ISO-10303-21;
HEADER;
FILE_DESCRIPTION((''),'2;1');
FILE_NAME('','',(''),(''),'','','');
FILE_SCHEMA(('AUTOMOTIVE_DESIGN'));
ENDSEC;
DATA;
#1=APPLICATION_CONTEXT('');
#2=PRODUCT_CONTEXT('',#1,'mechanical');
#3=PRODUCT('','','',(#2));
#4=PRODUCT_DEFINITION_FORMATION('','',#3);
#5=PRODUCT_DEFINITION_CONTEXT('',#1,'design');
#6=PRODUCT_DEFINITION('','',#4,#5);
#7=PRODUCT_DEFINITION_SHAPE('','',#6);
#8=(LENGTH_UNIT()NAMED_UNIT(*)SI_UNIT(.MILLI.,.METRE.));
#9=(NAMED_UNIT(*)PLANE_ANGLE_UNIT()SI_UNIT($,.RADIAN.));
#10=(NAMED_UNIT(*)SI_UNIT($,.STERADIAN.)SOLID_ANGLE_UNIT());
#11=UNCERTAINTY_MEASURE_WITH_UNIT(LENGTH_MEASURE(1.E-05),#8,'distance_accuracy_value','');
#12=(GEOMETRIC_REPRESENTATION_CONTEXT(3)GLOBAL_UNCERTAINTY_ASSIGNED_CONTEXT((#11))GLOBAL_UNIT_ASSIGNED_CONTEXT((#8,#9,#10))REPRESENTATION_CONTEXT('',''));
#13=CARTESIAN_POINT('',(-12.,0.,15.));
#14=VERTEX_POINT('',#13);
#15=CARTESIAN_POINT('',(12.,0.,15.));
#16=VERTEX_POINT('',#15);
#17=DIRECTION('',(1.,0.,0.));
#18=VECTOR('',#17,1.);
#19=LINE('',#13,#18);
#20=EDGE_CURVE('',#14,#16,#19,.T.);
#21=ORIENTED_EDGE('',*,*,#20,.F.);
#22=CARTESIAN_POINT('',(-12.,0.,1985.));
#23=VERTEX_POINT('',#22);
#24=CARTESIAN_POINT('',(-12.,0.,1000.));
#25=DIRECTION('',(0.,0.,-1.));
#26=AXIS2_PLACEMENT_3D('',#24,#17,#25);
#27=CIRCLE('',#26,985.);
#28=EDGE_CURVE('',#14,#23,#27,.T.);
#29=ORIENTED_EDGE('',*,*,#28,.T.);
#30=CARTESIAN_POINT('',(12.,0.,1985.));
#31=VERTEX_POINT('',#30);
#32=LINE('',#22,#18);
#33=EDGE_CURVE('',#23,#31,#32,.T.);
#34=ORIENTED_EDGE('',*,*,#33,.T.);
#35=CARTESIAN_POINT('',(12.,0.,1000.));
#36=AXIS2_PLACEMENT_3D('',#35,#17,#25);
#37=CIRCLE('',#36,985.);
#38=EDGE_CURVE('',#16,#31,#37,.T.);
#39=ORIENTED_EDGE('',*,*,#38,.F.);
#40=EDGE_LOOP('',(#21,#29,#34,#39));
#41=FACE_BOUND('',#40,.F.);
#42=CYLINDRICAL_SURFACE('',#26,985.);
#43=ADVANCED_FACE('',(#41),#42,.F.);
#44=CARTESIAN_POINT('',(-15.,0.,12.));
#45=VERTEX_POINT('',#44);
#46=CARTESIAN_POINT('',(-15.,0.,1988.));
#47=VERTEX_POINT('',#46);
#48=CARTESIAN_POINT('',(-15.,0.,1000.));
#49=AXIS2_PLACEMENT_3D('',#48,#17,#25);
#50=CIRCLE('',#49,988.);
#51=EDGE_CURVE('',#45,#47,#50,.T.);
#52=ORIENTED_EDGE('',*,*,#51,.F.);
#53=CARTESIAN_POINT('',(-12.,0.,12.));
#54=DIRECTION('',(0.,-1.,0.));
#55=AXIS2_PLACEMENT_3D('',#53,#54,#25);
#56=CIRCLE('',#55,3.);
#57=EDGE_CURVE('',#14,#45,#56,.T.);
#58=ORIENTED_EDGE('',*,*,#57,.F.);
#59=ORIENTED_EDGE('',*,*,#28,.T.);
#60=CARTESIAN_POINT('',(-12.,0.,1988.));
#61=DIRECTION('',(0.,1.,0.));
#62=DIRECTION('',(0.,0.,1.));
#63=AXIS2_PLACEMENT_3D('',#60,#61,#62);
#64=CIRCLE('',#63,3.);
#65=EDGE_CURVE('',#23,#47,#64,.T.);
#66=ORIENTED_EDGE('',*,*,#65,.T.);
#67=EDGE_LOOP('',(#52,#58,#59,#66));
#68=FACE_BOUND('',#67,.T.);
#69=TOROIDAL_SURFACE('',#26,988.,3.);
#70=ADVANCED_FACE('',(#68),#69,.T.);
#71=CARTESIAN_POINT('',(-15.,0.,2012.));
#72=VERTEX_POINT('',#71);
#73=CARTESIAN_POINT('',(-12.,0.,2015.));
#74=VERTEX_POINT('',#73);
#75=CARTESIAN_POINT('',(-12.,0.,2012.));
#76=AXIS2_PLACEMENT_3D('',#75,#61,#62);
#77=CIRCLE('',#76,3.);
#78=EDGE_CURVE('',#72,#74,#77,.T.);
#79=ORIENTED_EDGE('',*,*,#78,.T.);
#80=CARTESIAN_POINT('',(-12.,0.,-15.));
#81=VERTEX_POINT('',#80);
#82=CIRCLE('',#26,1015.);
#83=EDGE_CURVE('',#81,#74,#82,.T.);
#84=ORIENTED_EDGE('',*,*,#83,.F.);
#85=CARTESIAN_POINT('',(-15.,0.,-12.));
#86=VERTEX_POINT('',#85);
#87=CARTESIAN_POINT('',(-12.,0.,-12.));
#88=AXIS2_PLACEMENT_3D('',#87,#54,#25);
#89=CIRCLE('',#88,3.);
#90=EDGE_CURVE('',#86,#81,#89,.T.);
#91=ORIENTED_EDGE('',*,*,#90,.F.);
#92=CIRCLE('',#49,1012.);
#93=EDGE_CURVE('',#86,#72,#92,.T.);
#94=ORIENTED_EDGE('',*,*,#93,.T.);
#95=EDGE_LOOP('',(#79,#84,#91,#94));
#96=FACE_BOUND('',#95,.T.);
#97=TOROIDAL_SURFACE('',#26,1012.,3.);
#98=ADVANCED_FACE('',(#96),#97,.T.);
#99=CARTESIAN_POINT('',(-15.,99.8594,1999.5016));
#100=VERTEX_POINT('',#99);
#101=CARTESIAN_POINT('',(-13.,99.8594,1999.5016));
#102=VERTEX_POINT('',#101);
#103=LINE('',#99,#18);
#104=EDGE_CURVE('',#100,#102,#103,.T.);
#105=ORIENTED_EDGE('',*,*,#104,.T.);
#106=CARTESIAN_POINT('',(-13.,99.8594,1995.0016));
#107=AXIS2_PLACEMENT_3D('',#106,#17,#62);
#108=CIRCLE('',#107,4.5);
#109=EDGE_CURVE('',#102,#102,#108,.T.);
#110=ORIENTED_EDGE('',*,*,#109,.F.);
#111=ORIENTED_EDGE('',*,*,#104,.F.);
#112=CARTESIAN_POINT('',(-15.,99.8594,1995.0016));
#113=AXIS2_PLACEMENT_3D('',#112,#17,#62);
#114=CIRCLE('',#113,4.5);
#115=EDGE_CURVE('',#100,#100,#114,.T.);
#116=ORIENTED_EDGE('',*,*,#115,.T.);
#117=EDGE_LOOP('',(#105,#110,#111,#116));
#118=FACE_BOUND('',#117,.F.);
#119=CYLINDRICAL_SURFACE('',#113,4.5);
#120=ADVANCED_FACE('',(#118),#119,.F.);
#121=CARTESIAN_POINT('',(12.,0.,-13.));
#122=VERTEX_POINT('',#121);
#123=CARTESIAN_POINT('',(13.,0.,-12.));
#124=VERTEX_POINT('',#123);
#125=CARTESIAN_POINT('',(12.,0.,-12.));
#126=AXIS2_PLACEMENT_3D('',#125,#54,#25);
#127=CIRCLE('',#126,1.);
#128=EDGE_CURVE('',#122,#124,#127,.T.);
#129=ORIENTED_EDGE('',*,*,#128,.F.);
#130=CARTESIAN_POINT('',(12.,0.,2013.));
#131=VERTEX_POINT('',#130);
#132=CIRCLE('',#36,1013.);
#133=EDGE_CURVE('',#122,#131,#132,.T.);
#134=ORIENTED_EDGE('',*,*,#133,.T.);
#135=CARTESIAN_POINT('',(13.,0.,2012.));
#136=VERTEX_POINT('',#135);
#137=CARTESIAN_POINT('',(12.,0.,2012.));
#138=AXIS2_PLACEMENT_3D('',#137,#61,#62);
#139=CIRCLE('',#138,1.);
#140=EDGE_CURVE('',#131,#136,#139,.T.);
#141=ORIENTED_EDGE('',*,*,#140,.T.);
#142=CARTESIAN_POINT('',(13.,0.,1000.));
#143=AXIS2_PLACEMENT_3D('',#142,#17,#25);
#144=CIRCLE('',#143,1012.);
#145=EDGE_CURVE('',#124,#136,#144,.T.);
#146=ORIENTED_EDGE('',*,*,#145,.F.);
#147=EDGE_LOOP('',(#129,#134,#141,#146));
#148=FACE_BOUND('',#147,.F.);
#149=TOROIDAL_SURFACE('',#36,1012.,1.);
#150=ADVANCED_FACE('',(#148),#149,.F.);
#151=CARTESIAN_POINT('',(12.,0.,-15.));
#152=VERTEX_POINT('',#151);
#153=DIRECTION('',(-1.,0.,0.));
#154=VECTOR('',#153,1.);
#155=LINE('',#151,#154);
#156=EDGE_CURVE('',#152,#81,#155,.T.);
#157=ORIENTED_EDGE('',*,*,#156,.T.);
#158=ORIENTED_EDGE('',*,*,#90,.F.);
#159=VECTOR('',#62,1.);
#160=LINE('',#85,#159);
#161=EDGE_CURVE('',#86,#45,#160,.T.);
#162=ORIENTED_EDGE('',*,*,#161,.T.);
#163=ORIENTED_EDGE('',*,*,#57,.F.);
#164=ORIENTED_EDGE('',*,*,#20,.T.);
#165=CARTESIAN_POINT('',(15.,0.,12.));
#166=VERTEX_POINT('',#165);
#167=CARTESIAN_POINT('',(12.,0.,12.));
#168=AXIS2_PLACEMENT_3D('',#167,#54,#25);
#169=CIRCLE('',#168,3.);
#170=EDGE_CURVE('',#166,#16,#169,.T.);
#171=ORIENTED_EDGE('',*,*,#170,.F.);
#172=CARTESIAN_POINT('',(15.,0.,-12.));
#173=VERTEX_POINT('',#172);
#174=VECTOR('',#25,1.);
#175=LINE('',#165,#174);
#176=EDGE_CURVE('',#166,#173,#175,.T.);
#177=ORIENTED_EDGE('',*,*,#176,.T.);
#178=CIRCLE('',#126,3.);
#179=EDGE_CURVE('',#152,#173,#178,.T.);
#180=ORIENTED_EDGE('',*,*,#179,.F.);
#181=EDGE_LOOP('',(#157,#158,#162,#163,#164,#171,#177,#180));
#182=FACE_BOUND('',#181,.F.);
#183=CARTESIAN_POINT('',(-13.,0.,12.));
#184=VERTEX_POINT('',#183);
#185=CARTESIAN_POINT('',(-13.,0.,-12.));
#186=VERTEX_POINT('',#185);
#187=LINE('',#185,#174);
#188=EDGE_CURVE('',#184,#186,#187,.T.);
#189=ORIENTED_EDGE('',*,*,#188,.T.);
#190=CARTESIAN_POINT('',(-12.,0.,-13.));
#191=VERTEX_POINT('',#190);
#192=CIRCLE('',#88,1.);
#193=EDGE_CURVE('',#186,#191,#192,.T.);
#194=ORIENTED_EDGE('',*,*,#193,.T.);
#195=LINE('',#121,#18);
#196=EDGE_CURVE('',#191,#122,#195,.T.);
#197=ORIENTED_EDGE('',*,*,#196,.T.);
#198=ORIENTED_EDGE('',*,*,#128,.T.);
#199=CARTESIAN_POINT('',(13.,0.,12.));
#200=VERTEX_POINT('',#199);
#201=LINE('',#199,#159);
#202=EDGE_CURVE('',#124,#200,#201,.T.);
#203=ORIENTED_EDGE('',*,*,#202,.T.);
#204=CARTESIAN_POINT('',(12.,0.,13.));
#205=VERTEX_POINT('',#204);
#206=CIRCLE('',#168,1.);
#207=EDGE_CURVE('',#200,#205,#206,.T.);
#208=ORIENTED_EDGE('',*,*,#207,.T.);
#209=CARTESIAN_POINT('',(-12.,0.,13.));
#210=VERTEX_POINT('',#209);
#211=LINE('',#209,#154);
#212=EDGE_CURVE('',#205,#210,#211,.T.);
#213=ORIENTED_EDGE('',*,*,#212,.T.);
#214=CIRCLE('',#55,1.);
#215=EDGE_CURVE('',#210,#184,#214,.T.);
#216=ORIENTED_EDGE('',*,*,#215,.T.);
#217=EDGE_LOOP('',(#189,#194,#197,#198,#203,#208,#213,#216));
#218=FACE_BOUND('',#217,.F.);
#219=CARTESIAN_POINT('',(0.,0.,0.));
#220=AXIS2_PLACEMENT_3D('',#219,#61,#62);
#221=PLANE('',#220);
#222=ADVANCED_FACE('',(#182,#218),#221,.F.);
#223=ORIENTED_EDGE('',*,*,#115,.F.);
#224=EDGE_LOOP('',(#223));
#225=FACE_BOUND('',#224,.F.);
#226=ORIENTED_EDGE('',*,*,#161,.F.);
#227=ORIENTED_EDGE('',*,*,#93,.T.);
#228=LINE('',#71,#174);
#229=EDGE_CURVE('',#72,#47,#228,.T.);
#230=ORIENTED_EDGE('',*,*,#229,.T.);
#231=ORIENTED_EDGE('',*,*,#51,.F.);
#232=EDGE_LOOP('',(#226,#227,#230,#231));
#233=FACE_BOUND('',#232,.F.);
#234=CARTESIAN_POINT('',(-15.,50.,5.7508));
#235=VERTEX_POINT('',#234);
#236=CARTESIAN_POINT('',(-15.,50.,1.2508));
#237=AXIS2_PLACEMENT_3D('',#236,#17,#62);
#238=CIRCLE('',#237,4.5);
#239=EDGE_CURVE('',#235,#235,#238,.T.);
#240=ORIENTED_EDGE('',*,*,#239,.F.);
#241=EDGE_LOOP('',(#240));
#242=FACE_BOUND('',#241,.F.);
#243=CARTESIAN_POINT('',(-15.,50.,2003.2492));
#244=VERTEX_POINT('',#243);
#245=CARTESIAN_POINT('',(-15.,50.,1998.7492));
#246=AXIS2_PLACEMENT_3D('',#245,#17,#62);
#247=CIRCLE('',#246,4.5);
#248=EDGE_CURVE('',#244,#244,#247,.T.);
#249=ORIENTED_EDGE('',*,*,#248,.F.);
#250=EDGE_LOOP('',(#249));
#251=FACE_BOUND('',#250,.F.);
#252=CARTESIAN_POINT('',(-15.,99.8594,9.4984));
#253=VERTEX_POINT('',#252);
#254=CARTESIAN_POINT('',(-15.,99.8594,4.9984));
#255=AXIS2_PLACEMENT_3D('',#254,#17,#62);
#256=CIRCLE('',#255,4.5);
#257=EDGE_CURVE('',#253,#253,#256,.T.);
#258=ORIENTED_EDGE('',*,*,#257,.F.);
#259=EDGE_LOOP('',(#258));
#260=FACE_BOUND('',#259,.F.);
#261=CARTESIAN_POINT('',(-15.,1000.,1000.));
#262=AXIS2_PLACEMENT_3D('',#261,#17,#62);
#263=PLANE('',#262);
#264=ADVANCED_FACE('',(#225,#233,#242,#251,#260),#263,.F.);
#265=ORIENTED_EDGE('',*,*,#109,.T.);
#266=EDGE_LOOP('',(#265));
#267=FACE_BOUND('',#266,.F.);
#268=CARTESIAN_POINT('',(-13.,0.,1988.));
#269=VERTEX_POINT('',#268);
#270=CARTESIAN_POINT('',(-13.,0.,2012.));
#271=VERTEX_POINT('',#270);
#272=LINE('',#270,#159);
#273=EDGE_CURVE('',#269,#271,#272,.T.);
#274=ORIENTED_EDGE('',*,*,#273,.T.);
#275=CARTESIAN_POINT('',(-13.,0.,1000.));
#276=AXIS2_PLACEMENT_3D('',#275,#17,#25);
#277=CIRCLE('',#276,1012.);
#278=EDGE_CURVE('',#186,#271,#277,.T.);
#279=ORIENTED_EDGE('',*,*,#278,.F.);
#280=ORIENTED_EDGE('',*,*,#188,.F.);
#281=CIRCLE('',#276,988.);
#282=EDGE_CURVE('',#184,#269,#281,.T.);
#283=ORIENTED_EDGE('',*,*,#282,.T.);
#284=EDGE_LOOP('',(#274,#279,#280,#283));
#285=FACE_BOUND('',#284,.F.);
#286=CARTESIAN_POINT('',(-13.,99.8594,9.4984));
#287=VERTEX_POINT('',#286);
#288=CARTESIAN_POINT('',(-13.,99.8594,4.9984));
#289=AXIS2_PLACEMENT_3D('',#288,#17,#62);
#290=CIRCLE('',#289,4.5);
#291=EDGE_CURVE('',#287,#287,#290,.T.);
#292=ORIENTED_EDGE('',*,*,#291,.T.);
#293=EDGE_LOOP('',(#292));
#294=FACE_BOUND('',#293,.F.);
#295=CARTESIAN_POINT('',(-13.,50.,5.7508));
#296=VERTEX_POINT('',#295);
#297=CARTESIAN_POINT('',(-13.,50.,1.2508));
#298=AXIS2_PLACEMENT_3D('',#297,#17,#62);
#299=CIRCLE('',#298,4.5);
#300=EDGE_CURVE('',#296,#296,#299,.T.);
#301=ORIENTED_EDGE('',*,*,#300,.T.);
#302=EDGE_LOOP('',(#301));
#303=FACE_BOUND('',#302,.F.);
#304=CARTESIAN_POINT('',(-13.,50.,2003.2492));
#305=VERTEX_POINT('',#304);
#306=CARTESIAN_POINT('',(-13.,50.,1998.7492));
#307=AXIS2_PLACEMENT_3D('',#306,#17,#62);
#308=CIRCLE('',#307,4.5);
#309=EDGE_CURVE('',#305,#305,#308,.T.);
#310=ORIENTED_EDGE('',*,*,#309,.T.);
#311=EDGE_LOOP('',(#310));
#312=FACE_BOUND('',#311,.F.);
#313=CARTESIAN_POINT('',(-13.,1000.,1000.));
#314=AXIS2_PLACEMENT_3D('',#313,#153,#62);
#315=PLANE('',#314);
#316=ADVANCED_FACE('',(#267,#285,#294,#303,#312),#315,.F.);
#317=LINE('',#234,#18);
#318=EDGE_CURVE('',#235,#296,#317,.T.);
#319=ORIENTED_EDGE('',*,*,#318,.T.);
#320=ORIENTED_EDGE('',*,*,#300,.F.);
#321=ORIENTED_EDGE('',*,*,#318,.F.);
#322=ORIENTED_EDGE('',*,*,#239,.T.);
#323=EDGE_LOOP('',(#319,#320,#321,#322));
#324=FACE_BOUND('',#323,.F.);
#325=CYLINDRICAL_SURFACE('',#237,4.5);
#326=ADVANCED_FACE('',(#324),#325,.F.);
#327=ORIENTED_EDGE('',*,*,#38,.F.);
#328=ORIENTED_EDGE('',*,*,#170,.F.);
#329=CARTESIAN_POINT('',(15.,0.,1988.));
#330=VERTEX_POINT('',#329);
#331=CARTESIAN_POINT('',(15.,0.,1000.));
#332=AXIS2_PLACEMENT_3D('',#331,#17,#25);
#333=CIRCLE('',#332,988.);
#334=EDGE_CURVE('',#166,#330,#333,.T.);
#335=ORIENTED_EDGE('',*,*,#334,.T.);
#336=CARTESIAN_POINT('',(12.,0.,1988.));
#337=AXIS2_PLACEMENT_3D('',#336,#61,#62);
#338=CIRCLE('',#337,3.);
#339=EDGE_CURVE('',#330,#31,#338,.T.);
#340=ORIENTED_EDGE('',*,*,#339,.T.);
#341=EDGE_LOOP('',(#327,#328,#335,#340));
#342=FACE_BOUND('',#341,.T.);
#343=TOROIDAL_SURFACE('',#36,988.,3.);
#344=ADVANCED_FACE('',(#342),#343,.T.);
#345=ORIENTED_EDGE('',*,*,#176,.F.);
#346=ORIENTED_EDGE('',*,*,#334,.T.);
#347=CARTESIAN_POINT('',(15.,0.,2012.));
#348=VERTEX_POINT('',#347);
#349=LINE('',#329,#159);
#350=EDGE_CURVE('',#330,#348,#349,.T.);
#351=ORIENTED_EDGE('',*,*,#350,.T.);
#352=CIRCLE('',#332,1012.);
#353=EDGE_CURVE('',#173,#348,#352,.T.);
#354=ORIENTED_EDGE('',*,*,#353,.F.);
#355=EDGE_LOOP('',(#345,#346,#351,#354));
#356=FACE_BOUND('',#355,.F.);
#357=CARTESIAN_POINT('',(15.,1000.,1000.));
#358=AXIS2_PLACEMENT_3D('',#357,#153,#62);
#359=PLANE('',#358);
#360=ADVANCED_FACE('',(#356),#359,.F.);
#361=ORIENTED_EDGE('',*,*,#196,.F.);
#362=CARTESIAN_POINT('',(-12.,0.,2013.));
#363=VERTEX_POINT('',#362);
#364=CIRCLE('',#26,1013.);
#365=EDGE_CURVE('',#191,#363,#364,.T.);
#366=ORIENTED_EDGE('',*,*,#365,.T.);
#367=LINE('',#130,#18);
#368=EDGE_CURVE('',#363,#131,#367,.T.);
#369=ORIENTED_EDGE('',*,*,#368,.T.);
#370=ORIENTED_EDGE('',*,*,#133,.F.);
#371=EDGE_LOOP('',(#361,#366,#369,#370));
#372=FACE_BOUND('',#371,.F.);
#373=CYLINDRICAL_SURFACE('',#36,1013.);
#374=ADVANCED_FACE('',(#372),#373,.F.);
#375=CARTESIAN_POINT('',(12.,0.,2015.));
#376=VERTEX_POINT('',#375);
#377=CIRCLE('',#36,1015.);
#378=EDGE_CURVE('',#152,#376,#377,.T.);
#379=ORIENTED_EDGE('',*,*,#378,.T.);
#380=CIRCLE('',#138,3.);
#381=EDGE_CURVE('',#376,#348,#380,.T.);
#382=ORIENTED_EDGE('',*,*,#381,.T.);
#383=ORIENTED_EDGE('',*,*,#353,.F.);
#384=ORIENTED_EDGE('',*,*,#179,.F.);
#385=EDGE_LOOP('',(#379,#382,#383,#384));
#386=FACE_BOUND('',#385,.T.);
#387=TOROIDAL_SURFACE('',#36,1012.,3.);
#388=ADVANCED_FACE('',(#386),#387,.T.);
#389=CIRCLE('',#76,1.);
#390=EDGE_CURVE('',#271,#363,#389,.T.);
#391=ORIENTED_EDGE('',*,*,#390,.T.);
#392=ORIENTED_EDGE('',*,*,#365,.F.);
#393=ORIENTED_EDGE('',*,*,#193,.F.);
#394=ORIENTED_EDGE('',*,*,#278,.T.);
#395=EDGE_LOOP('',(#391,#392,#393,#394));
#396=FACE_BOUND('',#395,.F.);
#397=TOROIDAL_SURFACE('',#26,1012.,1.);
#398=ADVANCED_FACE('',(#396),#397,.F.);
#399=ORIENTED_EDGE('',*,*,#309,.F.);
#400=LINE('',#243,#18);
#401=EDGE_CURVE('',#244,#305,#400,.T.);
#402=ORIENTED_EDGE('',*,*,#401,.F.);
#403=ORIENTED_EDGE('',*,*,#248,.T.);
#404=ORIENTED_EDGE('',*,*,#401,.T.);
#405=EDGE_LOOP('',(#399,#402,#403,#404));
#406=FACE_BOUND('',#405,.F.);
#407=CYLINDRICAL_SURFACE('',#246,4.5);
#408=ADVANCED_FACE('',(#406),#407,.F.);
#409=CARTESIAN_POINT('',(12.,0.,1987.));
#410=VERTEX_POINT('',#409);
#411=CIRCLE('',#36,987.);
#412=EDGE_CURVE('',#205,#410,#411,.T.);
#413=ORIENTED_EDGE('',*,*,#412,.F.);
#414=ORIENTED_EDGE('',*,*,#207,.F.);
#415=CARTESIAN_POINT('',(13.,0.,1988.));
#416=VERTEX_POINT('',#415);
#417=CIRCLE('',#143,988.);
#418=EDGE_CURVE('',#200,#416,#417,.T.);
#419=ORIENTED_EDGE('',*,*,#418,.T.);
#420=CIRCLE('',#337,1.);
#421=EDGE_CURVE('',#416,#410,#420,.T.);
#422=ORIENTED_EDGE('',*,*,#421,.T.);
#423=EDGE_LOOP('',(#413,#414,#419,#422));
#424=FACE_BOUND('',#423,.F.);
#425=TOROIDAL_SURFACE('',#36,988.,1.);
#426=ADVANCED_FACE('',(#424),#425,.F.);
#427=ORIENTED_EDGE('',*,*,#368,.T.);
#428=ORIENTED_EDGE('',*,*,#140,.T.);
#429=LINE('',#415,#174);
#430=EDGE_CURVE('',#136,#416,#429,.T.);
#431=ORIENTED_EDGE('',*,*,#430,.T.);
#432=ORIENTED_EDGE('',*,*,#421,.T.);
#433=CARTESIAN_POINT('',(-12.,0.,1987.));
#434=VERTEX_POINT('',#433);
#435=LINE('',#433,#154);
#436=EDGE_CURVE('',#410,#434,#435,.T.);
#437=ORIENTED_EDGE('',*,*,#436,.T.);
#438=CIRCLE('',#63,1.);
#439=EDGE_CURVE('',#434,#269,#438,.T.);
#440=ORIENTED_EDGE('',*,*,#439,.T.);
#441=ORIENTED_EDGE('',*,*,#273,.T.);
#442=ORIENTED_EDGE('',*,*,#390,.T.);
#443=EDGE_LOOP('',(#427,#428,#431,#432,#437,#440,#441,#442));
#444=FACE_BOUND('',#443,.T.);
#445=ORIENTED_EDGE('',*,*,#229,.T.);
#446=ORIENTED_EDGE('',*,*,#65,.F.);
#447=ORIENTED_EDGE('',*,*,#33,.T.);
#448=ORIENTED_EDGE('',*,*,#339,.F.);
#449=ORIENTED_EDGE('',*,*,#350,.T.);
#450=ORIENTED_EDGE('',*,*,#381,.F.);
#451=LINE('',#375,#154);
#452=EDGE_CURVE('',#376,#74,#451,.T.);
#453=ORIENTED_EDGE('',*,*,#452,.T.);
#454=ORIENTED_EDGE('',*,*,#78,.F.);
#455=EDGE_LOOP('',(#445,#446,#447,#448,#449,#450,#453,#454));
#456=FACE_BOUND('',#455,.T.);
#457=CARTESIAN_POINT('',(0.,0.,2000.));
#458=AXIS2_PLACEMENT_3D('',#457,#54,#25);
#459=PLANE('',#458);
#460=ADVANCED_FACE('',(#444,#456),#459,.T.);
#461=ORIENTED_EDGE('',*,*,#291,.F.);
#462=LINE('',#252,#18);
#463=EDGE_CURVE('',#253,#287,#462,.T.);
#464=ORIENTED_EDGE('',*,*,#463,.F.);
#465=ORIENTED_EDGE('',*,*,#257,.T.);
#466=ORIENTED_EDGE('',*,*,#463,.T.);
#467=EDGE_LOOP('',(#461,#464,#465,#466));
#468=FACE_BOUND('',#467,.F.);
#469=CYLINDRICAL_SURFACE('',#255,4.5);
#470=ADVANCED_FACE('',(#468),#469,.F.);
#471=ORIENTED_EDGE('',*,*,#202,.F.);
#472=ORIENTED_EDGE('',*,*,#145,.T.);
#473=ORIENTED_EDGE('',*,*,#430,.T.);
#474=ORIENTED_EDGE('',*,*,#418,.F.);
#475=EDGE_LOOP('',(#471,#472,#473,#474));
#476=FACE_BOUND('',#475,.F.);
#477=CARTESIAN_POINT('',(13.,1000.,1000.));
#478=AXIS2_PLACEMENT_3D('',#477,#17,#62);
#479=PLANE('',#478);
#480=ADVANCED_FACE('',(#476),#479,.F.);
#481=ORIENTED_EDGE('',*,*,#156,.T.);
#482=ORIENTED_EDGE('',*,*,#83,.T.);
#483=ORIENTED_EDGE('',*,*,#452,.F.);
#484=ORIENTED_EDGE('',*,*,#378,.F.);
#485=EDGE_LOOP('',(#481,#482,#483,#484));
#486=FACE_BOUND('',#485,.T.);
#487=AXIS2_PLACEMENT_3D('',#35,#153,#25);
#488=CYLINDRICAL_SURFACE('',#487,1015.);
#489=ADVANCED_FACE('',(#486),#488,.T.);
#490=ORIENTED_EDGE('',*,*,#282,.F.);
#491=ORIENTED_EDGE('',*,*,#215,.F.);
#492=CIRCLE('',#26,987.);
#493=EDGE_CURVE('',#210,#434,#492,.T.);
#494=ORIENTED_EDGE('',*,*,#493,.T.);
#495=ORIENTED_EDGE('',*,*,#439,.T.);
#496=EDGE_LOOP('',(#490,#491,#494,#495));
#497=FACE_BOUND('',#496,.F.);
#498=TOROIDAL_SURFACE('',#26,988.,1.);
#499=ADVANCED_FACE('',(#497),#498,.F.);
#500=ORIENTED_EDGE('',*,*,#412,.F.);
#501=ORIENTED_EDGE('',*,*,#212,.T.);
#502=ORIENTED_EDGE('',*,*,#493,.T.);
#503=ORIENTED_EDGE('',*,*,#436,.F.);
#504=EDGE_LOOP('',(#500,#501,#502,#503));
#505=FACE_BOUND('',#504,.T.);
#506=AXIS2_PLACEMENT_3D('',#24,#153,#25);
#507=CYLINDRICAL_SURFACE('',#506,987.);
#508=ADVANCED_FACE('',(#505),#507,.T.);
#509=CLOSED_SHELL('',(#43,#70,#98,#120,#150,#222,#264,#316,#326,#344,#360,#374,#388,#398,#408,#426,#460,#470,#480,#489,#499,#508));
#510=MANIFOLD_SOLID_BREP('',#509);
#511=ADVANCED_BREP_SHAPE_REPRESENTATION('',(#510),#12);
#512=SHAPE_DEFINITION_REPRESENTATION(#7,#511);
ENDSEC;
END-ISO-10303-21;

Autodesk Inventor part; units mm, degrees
ref_plane "YZ Plane" through (0, 0, 0) normal (1, 0, 0) x (0, 1, 0)
ref_plane "XZ Plane" through (0, 0, 0) normal (0, 1, 0) x (-1, 0, 0)
sketch "Sketch1" plane through (0, 0, 0) normal (0, 1, 0) x (-1, 0, 0)
  line L0 (-12, 14) -> (12, 14) construction
  line L1 (14, 12) -> (14, -12) construction
  line L2 (12, -14) -> (-12, -14) construction
  line L3 (-14, -12) -> (-14, 12) construction
  line L4 (-14, 14) -> (14, -14) construction
  line L5 (14, 14) -> (-14, -14) construction
  arc A0 (14, 12) -> (12, 14) centre (12, 12) ccw construction
  arc A1 (12, -14) -> (14, -12) centre (12, -12) ccw construction
  arc A2 (-14, -12) -> (-12, -14) centre (-12, -12) ccw construction
  arc A3 (-12, 14) -> (-14, 12) centre (-12, 12) ccw construction
  line L6 (-12, -15) -> (12, -15)
  arc A4 (12, -15) -> (15, -12) centre (12, -12) ccw
  line L7 (15, -12) -> (15, 12)
  arc A5 (15, 12) -> (12, 15) centre (12, 12) ccw
  line L8 (12, 15) -> (-12, 15)
  arc A6 (-12, 15) -> (-15, 12) centre (-12, 12) ccw
  line L9 (-15, 12) -> (-15, -12)
  arc A7 (-15, -12) -> (-12, -15) centre (-12, -12) ccw
  line L10 (13, -12) -> (13, 12)
  arc A8 (13, 12) -> (12, 13) centre (12, 12) ccw
  line L11 (12, 13) -> (-12, 13)
  arc A9 (-12, 13) -> (-13, 12) centre (-12, 12) ccw
  line L12 (-13, 12) -> (-13, -12)
  arc A10 (-13, -12) -> (-12, -13) centre (-12, -12) ccw
  line L13 (-12, -13) -> (12, -13)
  arc A11 (12, -13) -> (13, -12) centre (12, -12) ccw
  point P0 (0, 0)
  point P1 (0, 0)
  point P2 (0, 0)
  dimension "d10" = 2
  dimension "depth" = 30
  dimension "width" = 30
  dimension "thickness" = 2
sketch "Sketch3" plane through (0, 0, 0) normal (1, 0, 0) x (0, 1, 0)
  line L0 (0, 0) -> (0, 2000) construction
  arc A0 (0, 0) -> (0, 2000) centre (0, 1000) ccw
  line L1 (0, -400) -> (0, 2400) projected
  line L2 (-200, 0) -> (1200, 0) projected
  dimension "d30" = 2000
  dimension "d31" = 1000
sweep "Sweep1" add profiles "Sketch1" path "Sketch3" path curves A0
sketch "Sketch5" plane through (-15, 0, 1000) normal (-1, 0, 0) x (0, 0, 1)
  arc A0 (1000, 0) -> (-1000, 0) centre (0, 0) ccw construction
  line L0 (-1012, 0) -> (-988, 0) projected
  line L1 (1012, 0) -> (988, 0) projected
  point P0 (-1000, 0)
  point P1 (-998.7492, 50)
  point P2 (-995.0016, 99.8594)
  point P3 (1000, 0)
  point P4 (998.7492, 50)
  point P5 (995.0016, 99.8594)
  dimension "d46" = 50
  dimension "d51" = 50
  dimension "d52" = 50
  dimension "d53" = 50
hole "Hole3" at (-15, 50, 1.2508) at (-15, 99.8594, 4.9984) at (-15, 50, 1998.7492) at (-15, 99.8594, 1995.0016) direction (1, 0, 0) diameter 9 depth 20.2 tip angle 118
ref_plane "Work Plane3" through (0, 0, 1000) normal (0, 0, 1) x (1, 0, 0)
equation "\"d10\" = thickness"
equation "\"d31\" = 0.5 * d30"
properties part number "Luk R2000 podest" material "Steel"
